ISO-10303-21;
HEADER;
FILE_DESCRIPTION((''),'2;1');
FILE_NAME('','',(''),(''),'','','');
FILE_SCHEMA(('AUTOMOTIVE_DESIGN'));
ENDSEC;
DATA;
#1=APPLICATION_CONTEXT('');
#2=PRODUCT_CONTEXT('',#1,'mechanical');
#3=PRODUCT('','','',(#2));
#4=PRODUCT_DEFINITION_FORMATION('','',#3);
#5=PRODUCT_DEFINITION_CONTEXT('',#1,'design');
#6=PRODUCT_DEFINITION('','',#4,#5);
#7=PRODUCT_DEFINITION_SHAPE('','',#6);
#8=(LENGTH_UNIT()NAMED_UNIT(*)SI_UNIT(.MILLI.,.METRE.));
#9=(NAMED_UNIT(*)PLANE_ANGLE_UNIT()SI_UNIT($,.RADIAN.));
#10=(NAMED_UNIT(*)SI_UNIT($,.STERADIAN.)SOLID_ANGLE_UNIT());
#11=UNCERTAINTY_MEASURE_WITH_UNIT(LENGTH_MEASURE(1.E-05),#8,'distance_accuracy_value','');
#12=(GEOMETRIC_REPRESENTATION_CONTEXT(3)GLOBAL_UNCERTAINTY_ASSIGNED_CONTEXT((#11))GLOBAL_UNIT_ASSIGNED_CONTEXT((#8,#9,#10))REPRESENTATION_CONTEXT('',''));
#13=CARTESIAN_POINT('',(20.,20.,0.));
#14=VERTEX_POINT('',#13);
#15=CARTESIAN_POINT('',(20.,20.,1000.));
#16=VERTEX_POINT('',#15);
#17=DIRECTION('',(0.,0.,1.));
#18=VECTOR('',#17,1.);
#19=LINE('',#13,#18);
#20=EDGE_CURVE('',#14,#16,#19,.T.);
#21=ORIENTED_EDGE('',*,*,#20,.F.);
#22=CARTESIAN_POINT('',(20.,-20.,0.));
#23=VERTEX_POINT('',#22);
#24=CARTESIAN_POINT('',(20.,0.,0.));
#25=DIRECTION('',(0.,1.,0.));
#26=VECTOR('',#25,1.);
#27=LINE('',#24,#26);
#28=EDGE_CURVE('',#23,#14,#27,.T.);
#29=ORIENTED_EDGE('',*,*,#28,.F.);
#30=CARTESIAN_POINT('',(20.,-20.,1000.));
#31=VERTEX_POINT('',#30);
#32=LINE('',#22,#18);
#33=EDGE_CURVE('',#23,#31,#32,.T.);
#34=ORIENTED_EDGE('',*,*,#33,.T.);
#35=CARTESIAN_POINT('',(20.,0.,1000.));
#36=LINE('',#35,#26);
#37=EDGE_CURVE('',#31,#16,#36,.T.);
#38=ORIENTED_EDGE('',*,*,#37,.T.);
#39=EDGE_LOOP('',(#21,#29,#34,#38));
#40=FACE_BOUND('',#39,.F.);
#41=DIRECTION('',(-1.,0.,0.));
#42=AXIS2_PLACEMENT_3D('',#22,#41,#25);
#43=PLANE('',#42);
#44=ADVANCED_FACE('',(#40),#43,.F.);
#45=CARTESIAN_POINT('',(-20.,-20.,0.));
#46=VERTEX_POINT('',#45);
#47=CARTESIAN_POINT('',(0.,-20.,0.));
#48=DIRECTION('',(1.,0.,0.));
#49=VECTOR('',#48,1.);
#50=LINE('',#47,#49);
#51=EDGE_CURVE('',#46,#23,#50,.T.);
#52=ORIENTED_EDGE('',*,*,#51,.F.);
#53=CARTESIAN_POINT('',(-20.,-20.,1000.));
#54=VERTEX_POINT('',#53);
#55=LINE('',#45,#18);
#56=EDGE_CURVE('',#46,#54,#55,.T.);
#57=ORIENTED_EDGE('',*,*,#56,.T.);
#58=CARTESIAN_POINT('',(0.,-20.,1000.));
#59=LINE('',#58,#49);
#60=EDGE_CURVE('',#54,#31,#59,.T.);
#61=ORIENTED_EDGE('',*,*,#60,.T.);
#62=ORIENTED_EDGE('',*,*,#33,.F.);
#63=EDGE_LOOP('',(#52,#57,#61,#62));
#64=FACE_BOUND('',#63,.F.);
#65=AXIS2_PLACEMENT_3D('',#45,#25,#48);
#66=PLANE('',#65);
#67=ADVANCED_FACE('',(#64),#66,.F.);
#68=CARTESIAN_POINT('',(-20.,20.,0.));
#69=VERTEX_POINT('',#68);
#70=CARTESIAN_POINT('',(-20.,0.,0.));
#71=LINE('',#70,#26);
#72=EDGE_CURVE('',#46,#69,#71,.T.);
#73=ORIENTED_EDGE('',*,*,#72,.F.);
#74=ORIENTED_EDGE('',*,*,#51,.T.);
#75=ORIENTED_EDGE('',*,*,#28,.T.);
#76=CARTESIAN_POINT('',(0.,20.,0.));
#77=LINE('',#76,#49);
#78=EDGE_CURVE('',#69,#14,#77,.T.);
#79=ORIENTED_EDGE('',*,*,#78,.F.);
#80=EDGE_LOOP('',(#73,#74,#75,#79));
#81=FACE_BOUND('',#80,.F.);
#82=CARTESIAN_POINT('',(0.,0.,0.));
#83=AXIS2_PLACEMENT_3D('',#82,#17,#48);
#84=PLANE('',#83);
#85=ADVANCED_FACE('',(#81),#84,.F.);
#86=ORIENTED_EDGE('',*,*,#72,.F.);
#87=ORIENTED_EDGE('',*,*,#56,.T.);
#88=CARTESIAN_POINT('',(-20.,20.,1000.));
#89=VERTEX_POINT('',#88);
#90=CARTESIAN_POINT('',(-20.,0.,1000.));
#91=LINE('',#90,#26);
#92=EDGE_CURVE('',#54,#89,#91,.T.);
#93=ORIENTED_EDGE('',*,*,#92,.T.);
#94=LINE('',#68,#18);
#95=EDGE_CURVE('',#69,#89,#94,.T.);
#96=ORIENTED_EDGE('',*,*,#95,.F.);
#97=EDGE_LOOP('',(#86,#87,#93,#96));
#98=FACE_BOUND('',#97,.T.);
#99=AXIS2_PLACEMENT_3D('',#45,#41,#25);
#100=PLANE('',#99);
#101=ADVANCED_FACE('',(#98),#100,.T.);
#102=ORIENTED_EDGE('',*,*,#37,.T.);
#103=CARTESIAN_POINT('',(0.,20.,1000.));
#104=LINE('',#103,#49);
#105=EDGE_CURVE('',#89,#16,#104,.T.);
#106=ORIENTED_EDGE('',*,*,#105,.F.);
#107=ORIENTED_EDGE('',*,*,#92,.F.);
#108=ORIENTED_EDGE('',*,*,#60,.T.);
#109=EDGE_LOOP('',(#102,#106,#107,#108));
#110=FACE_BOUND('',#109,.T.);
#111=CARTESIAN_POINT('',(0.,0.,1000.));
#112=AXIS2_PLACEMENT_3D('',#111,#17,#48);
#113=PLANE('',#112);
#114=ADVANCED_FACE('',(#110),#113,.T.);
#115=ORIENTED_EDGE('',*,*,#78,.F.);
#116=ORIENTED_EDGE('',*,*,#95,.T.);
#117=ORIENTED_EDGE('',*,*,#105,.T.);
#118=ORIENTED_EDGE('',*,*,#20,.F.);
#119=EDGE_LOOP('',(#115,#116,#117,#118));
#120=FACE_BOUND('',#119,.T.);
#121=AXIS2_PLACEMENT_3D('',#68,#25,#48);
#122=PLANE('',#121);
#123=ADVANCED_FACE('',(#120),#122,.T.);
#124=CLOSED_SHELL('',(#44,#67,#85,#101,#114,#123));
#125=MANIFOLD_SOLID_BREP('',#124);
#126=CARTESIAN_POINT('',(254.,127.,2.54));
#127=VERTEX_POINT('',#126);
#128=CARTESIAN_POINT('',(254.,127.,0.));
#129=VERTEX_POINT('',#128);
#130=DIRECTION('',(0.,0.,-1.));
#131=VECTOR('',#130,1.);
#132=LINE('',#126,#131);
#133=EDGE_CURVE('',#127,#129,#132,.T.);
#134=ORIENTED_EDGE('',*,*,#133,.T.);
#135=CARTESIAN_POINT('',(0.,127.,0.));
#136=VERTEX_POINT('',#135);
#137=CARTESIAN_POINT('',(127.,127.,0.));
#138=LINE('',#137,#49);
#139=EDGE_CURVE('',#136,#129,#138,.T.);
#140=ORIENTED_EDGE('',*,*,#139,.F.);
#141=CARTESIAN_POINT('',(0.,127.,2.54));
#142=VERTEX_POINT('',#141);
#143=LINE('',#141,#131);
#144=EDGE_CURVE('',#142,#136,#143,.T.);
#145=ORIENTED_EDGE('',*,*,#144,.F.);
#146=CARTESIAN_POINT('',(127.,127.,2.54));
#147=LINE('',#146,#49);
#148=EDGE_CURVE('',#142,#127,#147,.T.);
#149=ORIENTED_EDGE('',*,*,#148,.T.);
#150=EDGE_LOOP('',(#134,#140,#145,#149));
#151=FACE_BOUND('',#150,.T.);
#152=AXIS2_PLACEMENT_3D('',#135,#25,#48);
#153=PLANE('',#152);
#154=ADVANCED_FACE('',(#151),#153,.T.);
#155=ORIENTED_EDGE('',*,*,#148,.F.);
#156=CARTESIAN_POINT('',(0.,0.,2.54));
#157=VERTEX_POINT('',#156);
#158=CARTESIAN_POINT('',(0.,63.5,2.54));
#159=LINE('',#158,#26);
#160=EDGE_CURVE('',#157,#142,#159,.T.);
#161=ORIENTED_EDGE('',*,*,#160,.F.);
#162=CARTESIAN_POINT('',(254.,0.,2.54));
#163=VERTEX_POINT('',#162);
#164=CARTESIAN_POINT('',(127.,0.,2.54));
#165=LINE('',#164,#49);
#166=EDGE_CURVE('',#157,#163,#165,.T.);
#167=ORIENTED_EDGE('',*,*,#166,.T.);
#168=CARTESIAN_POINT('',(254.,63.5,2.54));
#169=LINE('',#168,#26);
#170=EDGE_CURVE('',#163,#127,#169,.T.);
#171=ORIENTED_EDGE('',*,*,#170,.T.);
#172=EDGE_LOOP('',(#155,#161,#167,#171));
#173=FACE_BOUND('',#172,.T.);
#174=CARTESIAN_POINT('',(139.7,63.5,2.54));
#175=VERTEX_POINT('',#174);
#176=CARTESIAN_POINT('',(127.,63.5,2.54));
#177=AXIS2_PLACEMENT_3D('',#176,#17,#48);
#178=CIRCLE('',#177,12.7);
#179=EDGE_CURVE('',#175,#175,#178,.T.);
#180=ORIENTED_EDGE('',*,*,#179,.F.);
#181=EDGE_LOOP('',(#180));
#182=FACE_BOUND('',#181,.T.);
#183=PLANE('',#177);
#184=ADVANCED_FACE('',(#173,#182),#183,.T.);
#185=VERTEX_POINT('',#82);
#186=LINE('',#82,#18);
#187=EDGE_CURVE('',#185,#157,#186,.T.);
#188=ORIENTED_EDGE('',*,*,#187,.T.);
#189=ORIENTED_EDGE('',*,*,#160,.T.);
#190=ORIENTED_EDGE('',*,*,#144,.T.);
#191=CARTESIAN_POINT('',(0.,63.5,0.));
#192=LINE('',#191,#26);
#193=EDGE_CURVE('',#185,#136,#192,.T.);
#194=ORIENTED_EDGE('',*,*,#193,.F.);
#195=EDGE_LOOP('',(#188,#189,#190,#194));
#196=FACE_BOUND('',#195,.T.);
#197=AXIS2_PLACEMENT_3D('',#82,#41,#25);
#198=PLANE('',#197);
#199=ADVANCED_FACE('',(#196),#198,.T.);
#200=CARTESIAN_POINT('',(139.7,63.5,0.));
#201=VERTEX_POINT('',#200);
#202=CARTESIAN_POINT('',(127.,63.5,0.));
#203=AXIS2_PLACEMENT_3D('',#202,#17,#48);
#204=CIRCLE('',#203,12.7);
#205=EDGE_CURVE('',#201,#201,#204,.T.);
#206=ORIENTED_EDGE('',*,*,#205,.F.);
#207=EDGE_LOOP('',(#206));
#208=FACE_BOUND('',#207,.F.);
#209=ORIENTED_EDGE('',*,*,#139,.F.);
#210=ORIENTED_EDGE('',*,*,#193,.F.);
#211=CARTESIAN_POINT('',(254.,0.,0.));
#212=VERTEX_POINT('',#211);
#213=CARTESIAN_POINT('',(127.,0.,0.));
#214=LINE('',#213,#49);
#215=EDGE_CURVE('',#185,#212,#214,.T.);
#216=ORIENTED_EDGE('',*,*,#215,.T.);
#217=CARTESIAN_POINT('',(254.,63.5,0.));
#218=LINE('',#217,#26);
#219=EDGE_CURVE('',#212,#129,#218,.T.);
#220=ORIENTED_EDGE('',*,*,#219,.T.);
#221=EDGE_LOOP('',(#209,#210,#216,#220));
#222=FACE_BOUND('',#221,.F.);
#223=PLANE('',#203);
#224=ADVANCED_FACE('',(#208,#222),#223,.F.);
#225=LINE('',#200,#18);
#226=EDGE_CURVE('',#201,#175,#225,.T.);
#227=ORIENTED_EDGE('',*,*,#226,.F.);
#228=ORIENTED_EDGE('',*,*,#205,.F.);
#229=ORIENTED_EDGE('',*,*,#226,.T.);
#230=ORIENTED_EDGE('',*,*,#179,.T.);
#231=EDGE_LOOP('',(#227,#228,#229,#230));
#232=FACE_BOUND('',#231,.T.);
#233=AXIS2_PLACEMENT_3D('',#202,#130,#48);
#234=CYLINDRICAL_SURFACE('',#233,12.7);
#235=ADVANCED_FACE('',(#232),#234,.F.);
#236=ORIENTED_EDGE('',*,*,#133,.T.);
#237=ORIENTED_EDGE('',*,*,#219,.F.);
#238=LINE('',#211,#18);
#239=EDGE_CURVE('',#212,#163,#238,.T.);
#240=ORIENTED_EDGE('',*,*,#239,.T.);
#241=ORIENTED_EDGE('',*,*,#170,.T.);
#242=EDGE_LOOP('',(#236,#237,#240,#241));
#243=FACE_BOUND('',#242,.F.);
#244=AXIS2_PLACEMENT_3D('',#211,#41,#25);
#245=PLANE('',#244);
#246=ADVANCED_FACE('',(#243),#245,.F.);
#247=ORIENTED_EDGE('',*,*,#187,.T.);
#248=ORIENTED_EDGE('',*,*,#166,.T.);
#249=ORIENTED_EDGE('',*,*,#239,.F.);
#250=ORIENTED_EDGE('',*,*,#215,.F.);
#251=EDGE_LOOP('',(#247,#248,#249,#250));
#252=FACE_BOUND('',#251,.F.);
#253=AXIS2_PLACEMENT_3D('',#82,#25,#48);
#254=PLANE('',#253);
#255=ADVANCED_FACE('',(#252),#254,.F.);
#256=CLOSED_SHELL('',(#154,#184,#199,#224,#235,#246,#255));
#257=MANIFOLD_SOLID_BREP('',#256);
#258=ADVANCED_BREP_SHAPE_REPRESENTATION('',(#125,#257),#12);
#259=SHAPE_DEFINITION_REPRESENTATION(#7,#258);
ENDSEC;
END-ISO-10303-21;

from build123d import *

# Parameters (mm, degrees)
F0_W     = 40
F0_H     = 40
F1_DEPTH = 1000
F2_W     = 254
F2_H     = 127
F2_R     = 12.7
F3_DEPTH = 0.254
F4_DEPTH = 2.54


with BuildPart() as f1:
    # F0 (on Top) → F1 (new body)
    with BuildSketch(Plane.XY):
        Rectangle(F0_W, F0_H)
    extrude(amount=F1_DEPTH)


with BuildPart() as f3:
    # F2 (on Top) → F3 (new body)
    with BuildSketch(Plane.XY):
        with Locations((127, 63.5)):
            Rectangle(F2_W, F2_H)
        with Locations((127, 63.5)):
            Circle(F2_R, mode=Mode.SUBTRACT)
    extrude(amount=F3_DEPTH)

    # F2 (on Top) → F4 (join)
    with BuildSketch(Plane.XY):
        with Locations((127, 63.5)):
            Rectangle(F2_W, F2_H)
        with Locations((127, 63.5)):
            Circle(F2_R, mode=Mode.SUBTRACT)
    extrude(amount=F4_DEPTH)


solid = Compound([f1.part, f3.part])
